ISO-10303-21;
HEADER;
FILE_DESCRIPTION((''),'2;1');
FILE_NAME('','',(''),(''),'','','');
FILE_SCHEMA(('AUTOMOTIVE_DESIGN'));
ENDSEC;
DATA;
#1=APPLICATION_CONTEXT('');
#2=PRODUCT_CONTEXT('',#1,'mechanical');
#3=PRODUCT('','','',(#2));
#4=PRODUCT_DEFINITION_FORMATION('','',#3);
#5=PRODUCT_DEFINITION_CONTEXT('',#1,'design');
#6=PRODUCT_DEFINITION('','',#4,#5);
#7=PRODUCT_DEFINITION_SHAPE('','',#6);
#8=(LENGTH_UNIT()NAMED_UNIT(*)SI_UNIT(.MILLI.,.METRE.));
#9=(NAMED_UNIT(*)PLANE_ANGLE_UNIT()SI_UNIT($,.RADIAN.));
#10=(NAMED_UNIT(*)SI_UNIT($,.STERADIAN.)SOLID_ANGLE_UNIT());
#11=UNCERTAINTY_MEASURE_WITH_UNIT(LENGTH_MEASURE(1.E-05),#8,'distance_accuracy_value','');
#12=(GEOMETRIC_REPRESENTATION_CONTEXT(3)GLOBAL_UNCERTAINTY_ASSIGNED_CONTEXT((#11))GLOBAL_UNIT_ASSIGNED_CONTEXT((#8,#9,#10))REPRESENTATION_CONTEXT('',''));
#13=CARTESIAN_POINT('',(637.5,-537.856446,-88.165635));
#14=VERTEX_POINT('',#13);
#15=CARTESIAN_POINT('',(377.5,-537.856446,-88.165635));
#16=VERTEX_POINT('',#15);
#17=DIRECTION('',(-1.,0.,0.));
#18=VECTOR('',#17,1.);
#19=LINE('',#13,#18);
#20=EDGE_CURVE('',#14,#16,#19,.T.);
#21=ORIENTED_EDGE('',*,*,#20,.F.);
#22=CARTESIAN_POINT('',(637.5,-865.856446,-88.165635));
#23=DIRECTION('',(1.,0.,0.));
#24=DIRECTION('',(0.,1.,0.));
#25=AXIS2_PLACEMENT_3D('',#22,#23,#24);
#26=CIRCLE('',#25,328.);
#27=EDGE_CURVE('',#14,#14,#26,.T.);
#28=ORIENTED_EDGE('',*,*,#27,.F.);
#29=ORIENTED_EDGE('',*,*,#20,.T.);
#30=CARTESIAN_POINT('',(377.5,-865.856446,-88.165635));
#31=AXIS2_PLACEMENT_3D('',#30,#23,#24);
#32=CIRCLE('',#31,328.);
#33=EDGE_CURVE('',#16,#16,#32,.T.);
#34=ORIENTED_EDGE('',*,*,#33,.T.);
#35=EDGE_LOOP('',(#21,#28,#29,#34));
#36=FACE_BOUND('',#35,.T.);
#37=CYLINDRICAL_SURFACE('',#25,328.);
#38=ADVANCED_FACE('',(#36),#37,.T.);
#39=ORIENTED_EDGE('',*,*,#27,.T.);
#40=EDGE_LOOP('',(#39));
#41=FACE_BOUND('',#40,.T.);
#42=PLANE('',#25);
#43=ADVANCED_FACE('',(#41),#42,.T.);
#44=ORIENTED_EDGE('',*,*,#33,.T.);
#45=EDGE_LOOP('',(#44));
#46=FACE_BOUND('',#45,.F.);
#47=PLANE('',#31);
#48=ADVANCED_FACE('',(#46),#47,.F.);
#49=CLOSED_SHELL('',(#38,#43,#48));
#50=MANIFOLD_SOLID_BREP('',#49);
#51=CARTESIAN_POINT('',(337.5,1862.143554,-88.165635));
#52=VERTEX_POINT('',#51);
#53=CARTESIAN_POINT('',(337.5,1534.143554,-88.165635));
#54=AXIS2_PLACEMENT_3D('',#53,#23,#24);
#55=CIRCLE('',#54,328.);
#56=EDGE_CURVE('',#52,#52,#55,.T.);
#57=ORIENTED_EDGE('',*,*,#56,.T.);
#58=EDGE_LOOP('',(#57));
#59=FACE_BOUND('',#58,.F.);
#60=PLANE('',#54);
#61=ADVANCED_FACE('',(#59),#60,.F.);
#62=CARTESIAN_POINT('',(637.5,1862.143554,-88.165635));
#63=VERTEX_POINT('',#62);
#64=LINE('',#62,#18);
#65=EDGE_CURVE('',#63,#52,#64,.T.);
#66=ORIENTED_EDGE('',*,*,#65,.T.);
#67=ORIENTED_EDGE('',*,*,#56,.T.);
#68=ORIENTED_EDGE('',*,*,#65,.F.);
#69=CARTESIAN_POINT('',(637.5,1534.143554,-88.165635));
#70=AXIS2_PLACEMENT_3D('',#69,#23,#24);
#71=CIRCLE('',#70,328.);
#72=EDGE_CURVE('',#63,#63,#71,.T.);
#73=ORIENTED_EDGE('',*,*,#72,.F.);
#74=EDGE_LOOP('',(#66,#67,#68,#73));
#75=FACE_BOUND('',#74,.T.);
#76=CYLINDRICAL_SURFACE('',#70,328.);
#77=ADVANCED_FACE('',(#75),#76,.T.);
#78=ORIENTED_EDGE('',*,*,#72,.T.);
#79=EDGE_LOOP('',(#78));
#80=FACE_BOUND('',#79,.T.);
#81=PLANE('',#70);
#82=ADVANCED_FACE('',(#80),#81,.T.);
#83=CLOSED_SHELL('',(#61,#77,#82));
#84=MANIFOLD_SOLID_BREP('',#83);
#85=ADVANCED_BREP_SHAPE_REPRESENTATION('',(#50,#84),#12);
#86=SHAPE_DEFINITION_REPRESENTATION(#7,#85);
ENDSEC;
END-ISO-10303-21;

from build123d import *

# Parameters (mm, degrees)
F6_R     = 328
F6_R_2   = 254
F7_DEPTH = 260
F8_DEPTH = 300


# Not quite as in the source:
# - the program builds the solid bodies; features that only make, move or delete a surface that nothing else refers to are left out


with BuildPart() as f7:
    # F6 (on offset) → F7 (new body)
    with BuildSketch(Plane.YZ.offset(637.5)):
        with Locations((-865.8564463551, -88.1656349745)):
            Circle(F6_R)
        with Locations((-865.8564463551, -88.1656349745)):
            Circle(F6_R_2, mode=Mode.SUBTRACT)
        with Locations((-865.8564463551, -88.1656349745)):
            Circle(F6_R_2)
    extrude(amount=-F7_DEPTH)


with BuildPart() as f8:
    # F6 (on offset) → F8 (new body)
    with BuildSketch(Plane.YZ.offset(637.5)):
        with Locations((1534.1435536449, -88.1656349745)):
            Circle(F6_R)
        with Locations((1534.1435536449, -88.1656349745)):
            Circle(F6_R_2, mode=Mode.SUBTRACT)
        with Locations((1534.1435536449, -88.1656349745)):
            Circle(F6_R_2)
    extrude(amount=-F8_DEPTH)


solid = Compound([f7.part, f8.part])
